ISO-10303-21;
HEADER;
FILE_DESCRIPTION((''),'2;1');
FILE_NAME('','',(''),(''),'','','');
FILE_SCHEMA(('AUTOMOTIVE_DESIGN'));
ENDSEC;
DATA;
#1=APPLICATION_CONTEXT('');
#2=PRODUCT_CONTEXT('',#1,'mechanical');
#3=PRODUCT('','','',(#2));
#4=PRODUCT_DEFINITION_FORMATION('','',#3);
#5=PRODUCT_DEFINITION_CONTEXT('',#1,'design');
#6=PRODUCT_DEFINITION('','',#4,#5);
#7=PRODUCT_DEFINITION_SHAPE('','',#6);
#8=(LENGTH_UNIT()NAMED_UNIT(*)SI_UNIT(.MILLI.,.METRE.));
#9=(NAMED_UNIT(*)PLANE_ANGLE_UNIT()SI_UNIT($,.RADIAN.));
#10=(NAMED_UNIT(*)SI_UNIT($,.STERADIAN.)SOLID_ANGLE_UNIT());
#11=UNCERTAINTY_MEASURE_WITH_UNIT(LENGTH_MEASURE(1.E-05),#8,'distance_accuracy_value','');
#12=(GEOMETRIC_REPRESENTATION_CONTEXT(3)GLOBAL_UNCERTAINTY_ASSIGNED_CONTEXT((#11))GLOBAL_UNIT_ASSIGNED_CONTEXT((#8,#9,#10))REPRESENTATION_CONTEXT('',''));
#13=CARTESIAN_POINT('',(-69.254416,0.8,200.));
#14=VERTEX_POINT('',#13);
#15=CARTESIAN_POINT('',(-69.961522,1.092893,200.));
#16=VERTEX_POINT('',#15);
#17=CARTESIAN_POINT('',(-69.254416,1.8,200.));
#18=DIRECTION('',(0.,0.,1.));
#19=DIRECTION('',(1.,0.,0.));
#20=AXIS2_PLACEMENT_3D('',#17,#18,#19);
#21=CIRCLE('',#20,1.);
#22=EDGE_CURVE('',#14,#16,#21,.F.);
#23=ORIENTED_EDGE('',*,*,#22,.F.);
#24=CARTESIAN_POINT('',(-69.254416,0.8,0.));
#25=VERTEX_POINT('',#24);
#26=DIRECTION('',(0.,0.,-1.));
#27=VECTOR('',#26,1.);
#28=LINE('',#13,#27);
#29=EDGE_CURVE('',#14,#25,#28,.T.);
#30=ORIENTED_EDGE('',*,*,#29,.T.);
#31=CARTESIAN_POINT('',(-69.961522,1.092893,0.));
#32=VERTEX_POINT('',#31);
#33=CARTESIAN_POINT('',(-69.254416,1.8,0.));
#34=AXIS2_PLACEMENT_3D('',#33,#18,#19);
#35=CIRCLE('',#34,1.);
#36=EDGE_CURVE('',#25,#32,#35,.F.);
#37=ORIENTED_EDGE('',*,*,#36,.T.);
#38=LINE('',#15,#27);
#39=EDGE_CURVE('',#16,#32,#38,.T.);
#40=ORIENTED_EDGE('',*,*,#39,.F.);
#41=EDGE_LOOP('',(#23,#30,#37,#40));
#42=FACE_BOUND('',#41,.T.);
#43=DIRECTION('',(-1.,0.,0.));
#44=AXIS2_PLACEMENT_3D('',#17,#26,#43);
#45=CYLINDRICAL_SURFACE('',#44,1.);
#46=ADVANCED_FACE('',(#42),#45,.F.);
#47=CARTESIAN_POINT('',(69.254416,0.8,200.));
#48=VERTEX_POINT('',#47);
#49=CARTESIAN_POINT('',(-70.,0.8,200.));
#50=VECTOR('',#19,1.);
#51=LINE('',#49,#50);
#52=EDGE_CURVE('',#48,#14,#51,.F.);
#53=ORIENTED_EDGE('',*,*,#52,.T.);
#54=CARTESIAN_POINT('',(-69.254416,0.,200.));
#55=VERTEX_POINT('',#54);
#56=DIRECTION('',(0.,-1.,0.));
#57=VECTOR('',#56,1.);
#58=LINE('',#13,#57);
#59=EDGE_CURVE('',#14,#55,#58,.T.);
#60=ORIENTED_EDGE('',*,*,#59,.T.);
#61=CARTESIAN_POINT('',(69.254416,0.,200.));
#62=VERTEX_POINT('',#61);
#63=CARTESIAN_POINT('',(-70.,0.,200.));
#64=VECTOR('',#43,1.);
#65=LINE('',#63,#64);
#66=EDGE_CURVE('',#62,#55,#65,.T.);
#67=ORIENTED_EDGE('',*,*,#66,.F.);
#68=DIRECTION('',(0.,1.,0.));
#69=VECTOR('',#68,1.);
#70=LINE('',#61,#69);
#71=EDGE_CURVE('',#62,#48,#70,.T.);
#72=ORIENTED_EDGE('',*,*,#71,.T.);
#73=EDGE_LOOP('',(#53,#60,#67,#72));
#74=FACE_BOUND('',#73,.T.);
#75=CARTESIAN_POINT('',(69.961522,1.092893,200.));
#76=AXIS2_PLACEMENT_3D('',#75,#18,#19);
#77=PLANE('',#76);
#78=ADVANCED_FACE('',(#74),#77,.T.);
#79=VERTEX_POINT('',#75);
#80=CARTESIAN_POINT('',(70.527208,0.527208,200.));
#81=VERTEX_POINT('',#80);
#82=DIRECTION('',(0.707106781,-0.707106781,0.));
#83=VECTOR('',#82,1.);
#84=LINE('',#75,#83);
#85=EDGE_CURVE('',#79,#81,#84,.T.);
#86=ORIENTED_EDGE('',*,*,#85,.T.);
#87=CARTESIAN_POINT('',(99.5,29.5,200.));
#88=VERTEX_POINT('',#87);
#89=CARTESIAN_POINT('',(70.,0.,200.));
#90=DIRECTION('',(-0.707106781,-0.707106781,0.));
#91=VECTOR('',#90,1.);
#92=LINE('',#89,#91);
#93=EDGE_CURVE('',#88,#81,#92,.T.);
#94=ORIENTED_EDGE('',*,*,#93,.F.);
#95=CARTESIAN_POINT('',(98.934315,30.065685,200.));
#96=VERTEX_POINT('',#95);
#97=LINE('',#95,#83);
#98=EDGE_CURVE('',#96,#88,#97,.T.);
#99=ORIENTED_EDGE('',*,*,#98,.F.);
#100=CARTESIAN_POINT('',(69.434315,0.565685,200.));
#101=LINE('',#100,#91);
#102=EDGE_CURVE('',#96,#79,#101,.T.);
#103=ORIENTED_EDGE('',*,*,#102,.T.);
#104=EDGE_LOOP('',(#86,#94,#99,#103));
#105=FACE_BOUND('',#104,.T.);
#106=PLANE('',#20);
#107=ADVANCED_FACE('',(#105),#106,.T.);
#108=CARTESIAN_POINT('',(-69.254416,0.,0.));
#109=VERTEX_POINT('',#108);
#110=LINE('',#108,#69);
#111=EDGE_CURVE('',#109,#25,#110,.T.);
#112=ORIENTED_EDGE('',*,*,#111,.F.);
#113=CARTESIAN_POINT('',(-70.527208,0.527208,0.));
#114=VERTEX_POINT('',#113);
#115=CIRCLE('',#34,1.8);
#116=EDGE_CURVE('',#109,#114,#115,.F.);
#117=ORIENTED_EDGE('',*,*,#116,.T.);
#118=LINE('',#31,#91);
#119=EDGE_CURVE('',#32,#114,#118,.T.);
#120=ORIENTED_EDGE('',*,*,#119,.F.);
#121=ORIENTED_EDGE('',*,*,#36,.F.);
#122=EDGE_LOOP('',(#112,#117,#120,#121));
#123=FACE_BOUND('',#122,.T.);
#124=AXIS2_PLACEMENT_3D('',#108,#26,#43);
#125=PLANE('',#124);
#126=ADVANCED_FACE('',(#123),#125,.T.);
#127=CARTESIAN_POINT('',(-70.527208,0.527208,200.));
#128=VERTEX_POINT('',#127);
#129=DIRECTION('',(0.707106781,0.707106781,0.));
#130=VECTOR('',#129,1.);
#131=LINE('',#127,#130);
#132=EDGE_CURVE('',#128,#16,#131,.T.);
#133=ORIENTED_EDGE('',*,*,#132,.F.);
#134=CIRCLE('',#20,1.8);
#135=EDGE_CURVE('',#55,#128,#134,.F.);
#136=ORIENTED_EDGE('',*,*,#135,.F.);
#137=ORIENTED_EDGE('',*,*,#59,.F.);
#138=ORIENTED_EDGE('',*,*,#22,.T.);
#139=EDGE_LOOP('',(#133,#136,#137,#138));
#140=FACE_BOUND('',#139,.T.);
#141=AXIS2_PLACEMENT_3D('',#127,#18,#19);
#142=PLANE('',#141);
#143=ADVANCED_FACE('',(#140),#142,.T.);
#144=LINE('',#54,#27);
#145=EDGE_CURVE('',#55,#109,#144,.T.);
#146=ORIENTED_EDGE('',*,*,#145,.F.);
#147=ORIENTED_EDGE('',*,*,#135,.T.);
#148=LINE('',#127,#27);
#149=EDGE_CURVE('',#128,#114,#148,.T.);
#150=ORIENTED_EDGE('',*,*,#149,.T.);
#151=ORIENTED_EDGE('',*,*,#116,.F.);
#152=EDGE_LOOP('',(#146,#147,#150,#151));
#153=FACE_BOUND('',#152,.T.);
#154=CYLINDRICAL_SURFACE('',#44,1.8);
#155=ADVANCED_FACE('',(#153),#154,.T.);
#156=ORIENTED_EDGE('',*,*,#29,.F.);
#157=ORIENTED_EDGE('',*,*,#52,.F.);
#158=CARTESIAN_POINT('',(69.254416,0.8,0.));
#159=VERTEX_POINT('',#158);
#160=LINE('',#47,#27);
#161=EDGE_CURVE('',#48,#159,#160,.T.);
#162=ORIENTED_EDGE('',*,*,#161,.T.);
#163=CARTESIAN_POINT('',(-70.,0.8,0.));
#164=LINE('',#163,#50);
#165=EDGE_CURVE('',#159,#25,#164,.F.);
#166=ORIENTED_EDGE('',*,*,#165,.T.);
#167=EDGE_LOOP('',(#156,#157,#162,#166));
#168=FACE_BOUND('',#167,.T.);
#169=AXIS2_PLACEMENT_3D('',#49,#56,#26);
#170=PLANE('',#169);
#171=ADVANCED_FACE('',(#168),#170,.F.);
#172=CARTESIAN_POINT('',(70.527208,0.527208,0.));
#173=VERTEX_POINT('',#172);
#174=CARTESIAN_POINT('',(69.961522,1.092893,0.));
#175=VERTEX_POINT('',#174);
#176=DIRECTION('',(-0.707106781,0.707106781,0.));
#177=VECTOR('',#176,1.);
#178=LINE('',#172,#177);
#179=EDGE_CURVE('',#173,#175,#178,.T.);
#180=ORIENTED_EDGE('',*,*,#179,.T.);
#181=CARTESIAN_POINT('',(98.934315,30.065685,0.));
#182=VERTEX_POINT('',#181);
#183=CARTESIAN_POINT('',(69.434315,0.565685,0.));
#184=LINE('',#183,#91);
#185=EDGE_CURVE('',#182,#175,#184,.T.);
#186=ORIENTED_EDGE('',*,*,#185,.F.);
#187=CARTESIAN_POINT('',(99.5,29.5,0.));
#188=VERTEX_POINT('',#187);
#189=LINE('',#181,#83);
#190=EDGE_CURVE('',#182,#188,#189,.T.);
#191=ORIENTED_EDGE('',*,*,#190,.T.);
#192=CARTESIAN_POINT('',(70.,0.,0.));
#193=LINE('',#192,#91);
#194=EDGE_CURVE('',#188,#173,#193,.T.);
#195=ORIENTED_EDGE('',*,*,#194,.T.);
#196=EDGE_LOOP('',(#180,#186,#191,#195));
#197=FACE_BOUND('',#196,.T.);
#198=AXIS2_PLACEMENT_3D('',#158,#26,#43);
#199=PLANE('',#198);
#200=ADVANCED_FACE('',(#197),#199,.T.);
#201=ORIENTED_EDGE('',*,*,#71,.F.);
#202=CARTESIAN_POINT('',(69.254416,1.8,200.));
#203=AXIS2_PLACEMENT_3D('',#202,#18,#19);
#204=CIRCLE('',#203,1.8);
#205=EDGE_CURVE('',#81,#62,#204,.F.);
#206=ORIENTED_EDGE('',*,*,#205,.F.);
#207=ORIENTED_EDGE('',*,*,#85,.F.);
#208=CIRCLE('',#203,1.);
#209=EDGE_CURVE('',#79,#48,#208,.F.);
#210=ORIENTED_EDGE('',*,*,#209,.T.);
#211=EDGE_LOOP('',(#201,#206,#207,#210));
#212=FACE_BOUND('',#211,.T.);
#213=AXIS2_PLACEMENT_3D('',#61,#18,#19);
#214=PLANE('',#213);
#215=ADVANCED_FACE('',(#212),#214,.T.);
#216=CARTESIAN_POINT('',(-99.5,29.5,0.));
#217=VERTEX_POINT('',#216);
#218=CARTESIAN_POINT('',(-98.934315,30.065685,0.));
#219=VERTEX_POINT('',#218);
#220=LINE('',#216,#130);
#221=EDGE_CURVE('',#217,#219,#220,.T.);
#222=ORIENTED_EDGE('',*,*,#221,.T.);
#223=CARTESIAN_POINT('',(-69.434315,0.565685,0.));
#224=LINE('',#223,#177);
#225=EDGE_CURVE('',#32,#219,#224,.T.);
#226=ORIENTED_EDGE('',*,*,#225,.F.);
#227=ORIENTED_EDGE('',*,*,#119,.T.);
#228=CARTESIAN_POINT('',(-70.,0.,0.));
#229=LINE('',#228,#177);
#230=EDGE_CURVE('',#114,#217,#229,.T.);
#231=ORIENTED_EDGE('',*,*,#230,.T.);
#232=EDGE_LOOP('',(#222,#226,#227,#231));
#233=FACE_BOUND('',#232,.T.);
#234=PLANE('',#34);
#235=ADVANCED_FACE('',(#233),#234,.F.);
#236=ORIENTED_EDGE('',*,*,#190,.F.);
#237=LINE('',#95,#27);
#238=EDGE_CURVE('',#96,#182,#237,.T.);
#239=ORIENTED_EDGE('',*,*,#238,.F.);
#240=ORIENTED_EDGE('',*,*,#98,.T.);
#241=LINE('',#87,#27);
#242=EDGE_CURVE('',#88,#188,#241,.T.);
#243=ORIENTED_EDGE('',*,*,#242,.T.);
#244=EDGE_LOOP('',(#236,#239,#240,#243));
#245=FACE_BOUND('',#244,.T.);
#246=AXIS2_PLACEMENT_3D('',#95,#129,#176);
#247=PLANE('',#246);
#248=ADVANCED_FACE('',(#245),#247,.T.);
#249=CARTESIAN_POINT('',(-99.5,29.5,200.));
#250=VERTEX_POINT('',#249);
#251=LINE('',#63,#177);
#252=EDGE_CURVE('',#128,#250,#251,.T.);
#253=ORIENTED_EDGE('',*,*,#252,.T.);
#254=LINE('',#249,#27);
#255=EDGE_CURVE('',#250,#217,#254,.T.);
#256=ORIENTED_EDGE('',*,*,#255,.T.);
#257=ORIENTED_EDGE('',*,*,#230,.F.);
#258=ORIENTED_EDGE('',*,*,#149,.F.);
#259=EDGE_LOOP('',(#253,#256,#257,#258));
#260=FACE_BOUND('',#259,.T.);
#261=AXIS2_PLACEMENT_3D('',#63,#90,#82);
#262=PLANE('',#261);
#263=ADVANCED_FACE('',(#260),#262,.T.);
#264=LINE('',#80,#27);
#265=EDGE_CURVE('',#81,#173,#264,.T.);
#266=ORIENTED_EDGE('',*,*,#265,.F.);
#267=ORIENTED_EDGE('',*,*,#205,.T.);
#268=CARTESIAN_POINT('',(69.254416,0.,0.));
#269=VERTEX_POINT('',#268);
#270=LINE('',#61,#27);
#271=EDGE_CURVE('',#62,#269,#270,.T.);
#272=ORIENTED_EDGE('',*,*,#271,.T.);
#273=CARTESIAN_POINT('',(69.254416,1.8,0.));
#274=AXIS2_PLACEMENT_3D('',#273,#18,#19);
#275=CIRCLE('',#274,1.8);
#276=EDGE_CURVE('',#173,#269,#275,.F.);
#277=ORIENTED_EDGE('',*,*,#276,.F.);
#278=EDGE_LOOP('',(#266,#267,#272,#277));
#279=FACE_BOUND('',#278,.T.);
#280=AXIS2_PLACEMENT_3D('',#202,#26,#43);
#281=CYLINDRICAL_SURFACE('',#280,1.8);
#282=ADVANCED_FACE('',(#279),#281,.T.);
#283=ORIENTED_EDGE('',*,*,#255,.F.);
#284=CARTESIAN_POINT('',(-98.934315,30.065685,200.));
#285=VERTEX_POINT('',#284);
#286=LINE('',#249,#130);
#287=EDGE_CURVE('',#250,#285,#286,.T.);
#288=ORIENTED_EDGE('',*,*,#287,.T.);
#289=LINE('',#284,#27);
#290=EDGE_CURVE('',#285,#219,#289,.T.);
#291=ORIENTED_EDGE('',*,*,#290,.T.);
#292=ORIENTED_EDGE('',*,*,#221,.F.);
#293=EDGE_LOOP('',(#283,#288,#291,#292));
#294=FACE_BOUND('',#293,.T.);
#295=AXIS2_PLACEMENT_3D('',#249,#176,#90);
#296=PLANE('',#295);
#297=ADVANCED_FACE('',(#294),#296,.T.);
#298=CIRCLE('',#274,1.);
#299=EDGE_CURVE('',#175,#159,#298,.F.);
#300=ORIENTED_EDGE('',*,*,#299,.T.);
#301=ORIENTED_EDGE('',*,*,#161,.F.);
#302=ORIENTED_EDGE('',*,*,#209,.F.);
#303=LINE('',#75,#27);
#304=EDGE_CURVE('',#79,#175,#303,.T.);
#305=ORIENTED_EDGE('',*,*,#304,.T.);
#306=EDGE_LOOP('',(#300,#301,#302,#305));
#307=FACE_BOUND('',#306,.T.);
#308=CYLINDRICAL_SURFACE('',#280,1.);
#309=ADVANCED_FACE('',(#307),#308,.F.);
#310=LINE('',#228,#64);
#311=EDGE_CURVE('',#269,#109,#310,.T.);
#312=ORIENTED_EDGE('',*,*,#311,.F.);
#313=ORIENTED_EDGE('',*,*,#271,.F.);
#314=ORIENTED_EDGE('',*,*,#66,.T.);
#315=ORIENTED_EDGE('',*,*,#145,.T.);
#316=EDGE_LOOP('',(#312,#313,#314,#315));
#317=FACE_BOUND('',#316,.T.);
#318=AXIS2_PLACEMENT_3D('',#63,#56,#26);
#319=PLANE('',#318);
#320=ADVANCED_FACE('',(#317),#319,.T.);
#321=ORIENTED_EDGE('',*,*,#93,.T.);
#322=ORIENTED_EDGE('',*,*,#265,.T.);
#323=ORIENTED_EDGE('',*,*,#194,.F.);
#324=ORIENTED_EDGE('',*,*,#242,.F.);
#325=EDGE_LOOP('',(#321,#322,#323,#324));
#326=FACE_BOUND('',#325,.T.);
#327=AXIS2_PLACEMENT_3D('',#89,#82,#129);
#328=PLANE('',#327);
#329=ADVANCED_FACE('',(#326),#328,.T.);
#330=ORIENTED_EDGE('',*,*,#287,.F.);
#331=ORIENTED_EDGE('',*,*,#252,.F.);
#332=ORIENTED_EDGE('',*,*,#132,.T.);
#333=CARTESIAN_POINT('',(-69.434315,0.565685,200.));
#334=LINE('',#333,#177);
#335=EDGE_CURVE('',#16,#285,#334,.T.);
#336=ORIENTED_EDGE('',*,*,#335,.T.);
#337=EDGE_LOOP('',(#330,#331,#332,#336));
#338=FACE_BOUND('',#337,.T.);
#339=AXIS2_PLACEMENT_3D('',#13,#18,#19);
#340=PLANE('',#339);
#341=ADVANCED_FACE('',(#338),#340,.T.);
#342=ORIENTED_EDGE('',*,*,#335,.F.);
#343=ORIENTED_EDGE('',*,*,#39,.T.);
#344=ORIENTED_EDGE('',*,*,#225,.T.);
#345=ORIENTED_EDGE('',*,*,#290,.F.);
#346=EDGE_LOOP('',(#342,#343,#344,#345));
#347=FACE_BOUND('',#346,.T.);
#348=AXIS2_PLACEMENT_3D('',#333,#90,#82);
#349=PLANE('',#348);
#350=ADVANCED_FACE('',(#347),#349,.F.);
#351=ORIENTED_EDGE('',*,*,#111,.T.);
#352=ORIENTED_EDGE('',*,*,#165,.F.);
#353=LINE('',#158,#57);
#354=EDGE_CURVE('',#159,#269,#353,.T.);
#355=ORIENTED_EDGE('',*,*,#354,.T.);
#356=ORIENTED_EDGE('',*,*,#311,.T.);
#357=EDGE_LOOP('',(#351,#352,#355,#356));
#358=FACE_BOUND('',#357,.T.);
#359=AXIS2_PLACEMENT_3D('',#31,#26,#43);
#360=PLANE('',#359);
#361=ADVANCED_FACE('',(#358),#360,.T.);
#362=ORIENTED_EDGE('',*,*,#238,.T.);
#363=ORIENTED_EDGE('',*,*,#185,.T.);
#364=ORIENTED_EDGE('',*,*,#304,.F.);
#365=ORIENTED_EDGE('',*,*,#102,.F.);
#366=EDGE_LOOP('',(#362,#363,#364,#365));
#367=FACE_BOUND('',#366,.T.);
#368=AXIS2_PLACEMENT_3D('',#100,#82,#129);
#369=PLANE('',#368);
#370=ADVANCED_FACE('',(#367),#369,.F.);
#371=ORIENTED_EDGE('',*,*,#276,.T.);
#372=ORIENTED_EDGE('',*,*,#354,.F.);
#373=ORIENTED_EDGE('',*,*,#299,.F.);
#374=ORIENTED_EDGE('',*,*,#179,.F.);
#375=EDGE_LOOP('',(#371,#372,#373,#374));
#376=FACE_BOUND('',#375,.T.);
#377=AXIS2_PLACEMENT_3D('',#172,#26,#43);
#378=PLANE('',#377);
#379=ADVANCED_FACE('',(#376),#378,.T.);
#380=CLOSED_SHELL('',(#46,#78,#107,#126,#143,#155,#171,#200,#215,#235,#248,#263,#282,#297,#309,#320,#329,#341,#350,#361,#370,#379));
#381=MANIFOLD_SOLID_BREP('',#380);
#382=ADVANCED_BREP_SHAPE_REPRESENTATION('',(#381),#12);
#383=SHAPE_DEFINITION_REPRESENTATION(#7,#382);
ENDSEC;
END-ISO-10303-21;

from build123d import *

# Parameters (mm, degrees)
T_LE_DE_BASE_PLI_E1_DEPTH = 200


# Sheet-metal steps are written as plain solids
with BuildPart() as part:
    # Esquisse1 → Tôle de base pliée1 (new body)
    with BuildSketch(Plane.XY):
        with BuildLine():
            Line((-99.5, 29.5), (-70.527207794, 0.527207794))
            ThreePointArc((-70.527207794, 0.527207794), (-69.943245766, 0.137016841), (-69.254415588, 0))
            Line((-69.254415588, 0), (69.254415588, 0))
            ThreePointArc((69.254415588, 0), (69.943245766, 0.137016841), (70.527207794, 0.527207794))
            Line((70.527207794, 0.527207794), (99.5, 29.5))
            Line((99.5, 29.5), (98.934314575, 30.065685425))
            Line((98.934314575, 30.065685425), (69.961522369, 1.092893219))
            ThreePointArc((69.961522369, 1.092893219), (69.63709902, 0.876120467), (69.254415588, 0.8))
            Line((69.254415588, 0.8), (-69.254415588, 0.8))
            ThreePointArc((-69.254415588, 0.8), (-69.63709902, 0.876120467), (-69.961522369, 1.092893219))
            Line((-69.961522369, 1.092893219), (-98.934314575, 30.065685425))
            Line((-98.934314575, 30.065685425), (-99.5, 29.5))
        make_face()
    extrude(amount=T_LE_DE_BASE_PLI_E1_DEPTH)


solid = part.part
